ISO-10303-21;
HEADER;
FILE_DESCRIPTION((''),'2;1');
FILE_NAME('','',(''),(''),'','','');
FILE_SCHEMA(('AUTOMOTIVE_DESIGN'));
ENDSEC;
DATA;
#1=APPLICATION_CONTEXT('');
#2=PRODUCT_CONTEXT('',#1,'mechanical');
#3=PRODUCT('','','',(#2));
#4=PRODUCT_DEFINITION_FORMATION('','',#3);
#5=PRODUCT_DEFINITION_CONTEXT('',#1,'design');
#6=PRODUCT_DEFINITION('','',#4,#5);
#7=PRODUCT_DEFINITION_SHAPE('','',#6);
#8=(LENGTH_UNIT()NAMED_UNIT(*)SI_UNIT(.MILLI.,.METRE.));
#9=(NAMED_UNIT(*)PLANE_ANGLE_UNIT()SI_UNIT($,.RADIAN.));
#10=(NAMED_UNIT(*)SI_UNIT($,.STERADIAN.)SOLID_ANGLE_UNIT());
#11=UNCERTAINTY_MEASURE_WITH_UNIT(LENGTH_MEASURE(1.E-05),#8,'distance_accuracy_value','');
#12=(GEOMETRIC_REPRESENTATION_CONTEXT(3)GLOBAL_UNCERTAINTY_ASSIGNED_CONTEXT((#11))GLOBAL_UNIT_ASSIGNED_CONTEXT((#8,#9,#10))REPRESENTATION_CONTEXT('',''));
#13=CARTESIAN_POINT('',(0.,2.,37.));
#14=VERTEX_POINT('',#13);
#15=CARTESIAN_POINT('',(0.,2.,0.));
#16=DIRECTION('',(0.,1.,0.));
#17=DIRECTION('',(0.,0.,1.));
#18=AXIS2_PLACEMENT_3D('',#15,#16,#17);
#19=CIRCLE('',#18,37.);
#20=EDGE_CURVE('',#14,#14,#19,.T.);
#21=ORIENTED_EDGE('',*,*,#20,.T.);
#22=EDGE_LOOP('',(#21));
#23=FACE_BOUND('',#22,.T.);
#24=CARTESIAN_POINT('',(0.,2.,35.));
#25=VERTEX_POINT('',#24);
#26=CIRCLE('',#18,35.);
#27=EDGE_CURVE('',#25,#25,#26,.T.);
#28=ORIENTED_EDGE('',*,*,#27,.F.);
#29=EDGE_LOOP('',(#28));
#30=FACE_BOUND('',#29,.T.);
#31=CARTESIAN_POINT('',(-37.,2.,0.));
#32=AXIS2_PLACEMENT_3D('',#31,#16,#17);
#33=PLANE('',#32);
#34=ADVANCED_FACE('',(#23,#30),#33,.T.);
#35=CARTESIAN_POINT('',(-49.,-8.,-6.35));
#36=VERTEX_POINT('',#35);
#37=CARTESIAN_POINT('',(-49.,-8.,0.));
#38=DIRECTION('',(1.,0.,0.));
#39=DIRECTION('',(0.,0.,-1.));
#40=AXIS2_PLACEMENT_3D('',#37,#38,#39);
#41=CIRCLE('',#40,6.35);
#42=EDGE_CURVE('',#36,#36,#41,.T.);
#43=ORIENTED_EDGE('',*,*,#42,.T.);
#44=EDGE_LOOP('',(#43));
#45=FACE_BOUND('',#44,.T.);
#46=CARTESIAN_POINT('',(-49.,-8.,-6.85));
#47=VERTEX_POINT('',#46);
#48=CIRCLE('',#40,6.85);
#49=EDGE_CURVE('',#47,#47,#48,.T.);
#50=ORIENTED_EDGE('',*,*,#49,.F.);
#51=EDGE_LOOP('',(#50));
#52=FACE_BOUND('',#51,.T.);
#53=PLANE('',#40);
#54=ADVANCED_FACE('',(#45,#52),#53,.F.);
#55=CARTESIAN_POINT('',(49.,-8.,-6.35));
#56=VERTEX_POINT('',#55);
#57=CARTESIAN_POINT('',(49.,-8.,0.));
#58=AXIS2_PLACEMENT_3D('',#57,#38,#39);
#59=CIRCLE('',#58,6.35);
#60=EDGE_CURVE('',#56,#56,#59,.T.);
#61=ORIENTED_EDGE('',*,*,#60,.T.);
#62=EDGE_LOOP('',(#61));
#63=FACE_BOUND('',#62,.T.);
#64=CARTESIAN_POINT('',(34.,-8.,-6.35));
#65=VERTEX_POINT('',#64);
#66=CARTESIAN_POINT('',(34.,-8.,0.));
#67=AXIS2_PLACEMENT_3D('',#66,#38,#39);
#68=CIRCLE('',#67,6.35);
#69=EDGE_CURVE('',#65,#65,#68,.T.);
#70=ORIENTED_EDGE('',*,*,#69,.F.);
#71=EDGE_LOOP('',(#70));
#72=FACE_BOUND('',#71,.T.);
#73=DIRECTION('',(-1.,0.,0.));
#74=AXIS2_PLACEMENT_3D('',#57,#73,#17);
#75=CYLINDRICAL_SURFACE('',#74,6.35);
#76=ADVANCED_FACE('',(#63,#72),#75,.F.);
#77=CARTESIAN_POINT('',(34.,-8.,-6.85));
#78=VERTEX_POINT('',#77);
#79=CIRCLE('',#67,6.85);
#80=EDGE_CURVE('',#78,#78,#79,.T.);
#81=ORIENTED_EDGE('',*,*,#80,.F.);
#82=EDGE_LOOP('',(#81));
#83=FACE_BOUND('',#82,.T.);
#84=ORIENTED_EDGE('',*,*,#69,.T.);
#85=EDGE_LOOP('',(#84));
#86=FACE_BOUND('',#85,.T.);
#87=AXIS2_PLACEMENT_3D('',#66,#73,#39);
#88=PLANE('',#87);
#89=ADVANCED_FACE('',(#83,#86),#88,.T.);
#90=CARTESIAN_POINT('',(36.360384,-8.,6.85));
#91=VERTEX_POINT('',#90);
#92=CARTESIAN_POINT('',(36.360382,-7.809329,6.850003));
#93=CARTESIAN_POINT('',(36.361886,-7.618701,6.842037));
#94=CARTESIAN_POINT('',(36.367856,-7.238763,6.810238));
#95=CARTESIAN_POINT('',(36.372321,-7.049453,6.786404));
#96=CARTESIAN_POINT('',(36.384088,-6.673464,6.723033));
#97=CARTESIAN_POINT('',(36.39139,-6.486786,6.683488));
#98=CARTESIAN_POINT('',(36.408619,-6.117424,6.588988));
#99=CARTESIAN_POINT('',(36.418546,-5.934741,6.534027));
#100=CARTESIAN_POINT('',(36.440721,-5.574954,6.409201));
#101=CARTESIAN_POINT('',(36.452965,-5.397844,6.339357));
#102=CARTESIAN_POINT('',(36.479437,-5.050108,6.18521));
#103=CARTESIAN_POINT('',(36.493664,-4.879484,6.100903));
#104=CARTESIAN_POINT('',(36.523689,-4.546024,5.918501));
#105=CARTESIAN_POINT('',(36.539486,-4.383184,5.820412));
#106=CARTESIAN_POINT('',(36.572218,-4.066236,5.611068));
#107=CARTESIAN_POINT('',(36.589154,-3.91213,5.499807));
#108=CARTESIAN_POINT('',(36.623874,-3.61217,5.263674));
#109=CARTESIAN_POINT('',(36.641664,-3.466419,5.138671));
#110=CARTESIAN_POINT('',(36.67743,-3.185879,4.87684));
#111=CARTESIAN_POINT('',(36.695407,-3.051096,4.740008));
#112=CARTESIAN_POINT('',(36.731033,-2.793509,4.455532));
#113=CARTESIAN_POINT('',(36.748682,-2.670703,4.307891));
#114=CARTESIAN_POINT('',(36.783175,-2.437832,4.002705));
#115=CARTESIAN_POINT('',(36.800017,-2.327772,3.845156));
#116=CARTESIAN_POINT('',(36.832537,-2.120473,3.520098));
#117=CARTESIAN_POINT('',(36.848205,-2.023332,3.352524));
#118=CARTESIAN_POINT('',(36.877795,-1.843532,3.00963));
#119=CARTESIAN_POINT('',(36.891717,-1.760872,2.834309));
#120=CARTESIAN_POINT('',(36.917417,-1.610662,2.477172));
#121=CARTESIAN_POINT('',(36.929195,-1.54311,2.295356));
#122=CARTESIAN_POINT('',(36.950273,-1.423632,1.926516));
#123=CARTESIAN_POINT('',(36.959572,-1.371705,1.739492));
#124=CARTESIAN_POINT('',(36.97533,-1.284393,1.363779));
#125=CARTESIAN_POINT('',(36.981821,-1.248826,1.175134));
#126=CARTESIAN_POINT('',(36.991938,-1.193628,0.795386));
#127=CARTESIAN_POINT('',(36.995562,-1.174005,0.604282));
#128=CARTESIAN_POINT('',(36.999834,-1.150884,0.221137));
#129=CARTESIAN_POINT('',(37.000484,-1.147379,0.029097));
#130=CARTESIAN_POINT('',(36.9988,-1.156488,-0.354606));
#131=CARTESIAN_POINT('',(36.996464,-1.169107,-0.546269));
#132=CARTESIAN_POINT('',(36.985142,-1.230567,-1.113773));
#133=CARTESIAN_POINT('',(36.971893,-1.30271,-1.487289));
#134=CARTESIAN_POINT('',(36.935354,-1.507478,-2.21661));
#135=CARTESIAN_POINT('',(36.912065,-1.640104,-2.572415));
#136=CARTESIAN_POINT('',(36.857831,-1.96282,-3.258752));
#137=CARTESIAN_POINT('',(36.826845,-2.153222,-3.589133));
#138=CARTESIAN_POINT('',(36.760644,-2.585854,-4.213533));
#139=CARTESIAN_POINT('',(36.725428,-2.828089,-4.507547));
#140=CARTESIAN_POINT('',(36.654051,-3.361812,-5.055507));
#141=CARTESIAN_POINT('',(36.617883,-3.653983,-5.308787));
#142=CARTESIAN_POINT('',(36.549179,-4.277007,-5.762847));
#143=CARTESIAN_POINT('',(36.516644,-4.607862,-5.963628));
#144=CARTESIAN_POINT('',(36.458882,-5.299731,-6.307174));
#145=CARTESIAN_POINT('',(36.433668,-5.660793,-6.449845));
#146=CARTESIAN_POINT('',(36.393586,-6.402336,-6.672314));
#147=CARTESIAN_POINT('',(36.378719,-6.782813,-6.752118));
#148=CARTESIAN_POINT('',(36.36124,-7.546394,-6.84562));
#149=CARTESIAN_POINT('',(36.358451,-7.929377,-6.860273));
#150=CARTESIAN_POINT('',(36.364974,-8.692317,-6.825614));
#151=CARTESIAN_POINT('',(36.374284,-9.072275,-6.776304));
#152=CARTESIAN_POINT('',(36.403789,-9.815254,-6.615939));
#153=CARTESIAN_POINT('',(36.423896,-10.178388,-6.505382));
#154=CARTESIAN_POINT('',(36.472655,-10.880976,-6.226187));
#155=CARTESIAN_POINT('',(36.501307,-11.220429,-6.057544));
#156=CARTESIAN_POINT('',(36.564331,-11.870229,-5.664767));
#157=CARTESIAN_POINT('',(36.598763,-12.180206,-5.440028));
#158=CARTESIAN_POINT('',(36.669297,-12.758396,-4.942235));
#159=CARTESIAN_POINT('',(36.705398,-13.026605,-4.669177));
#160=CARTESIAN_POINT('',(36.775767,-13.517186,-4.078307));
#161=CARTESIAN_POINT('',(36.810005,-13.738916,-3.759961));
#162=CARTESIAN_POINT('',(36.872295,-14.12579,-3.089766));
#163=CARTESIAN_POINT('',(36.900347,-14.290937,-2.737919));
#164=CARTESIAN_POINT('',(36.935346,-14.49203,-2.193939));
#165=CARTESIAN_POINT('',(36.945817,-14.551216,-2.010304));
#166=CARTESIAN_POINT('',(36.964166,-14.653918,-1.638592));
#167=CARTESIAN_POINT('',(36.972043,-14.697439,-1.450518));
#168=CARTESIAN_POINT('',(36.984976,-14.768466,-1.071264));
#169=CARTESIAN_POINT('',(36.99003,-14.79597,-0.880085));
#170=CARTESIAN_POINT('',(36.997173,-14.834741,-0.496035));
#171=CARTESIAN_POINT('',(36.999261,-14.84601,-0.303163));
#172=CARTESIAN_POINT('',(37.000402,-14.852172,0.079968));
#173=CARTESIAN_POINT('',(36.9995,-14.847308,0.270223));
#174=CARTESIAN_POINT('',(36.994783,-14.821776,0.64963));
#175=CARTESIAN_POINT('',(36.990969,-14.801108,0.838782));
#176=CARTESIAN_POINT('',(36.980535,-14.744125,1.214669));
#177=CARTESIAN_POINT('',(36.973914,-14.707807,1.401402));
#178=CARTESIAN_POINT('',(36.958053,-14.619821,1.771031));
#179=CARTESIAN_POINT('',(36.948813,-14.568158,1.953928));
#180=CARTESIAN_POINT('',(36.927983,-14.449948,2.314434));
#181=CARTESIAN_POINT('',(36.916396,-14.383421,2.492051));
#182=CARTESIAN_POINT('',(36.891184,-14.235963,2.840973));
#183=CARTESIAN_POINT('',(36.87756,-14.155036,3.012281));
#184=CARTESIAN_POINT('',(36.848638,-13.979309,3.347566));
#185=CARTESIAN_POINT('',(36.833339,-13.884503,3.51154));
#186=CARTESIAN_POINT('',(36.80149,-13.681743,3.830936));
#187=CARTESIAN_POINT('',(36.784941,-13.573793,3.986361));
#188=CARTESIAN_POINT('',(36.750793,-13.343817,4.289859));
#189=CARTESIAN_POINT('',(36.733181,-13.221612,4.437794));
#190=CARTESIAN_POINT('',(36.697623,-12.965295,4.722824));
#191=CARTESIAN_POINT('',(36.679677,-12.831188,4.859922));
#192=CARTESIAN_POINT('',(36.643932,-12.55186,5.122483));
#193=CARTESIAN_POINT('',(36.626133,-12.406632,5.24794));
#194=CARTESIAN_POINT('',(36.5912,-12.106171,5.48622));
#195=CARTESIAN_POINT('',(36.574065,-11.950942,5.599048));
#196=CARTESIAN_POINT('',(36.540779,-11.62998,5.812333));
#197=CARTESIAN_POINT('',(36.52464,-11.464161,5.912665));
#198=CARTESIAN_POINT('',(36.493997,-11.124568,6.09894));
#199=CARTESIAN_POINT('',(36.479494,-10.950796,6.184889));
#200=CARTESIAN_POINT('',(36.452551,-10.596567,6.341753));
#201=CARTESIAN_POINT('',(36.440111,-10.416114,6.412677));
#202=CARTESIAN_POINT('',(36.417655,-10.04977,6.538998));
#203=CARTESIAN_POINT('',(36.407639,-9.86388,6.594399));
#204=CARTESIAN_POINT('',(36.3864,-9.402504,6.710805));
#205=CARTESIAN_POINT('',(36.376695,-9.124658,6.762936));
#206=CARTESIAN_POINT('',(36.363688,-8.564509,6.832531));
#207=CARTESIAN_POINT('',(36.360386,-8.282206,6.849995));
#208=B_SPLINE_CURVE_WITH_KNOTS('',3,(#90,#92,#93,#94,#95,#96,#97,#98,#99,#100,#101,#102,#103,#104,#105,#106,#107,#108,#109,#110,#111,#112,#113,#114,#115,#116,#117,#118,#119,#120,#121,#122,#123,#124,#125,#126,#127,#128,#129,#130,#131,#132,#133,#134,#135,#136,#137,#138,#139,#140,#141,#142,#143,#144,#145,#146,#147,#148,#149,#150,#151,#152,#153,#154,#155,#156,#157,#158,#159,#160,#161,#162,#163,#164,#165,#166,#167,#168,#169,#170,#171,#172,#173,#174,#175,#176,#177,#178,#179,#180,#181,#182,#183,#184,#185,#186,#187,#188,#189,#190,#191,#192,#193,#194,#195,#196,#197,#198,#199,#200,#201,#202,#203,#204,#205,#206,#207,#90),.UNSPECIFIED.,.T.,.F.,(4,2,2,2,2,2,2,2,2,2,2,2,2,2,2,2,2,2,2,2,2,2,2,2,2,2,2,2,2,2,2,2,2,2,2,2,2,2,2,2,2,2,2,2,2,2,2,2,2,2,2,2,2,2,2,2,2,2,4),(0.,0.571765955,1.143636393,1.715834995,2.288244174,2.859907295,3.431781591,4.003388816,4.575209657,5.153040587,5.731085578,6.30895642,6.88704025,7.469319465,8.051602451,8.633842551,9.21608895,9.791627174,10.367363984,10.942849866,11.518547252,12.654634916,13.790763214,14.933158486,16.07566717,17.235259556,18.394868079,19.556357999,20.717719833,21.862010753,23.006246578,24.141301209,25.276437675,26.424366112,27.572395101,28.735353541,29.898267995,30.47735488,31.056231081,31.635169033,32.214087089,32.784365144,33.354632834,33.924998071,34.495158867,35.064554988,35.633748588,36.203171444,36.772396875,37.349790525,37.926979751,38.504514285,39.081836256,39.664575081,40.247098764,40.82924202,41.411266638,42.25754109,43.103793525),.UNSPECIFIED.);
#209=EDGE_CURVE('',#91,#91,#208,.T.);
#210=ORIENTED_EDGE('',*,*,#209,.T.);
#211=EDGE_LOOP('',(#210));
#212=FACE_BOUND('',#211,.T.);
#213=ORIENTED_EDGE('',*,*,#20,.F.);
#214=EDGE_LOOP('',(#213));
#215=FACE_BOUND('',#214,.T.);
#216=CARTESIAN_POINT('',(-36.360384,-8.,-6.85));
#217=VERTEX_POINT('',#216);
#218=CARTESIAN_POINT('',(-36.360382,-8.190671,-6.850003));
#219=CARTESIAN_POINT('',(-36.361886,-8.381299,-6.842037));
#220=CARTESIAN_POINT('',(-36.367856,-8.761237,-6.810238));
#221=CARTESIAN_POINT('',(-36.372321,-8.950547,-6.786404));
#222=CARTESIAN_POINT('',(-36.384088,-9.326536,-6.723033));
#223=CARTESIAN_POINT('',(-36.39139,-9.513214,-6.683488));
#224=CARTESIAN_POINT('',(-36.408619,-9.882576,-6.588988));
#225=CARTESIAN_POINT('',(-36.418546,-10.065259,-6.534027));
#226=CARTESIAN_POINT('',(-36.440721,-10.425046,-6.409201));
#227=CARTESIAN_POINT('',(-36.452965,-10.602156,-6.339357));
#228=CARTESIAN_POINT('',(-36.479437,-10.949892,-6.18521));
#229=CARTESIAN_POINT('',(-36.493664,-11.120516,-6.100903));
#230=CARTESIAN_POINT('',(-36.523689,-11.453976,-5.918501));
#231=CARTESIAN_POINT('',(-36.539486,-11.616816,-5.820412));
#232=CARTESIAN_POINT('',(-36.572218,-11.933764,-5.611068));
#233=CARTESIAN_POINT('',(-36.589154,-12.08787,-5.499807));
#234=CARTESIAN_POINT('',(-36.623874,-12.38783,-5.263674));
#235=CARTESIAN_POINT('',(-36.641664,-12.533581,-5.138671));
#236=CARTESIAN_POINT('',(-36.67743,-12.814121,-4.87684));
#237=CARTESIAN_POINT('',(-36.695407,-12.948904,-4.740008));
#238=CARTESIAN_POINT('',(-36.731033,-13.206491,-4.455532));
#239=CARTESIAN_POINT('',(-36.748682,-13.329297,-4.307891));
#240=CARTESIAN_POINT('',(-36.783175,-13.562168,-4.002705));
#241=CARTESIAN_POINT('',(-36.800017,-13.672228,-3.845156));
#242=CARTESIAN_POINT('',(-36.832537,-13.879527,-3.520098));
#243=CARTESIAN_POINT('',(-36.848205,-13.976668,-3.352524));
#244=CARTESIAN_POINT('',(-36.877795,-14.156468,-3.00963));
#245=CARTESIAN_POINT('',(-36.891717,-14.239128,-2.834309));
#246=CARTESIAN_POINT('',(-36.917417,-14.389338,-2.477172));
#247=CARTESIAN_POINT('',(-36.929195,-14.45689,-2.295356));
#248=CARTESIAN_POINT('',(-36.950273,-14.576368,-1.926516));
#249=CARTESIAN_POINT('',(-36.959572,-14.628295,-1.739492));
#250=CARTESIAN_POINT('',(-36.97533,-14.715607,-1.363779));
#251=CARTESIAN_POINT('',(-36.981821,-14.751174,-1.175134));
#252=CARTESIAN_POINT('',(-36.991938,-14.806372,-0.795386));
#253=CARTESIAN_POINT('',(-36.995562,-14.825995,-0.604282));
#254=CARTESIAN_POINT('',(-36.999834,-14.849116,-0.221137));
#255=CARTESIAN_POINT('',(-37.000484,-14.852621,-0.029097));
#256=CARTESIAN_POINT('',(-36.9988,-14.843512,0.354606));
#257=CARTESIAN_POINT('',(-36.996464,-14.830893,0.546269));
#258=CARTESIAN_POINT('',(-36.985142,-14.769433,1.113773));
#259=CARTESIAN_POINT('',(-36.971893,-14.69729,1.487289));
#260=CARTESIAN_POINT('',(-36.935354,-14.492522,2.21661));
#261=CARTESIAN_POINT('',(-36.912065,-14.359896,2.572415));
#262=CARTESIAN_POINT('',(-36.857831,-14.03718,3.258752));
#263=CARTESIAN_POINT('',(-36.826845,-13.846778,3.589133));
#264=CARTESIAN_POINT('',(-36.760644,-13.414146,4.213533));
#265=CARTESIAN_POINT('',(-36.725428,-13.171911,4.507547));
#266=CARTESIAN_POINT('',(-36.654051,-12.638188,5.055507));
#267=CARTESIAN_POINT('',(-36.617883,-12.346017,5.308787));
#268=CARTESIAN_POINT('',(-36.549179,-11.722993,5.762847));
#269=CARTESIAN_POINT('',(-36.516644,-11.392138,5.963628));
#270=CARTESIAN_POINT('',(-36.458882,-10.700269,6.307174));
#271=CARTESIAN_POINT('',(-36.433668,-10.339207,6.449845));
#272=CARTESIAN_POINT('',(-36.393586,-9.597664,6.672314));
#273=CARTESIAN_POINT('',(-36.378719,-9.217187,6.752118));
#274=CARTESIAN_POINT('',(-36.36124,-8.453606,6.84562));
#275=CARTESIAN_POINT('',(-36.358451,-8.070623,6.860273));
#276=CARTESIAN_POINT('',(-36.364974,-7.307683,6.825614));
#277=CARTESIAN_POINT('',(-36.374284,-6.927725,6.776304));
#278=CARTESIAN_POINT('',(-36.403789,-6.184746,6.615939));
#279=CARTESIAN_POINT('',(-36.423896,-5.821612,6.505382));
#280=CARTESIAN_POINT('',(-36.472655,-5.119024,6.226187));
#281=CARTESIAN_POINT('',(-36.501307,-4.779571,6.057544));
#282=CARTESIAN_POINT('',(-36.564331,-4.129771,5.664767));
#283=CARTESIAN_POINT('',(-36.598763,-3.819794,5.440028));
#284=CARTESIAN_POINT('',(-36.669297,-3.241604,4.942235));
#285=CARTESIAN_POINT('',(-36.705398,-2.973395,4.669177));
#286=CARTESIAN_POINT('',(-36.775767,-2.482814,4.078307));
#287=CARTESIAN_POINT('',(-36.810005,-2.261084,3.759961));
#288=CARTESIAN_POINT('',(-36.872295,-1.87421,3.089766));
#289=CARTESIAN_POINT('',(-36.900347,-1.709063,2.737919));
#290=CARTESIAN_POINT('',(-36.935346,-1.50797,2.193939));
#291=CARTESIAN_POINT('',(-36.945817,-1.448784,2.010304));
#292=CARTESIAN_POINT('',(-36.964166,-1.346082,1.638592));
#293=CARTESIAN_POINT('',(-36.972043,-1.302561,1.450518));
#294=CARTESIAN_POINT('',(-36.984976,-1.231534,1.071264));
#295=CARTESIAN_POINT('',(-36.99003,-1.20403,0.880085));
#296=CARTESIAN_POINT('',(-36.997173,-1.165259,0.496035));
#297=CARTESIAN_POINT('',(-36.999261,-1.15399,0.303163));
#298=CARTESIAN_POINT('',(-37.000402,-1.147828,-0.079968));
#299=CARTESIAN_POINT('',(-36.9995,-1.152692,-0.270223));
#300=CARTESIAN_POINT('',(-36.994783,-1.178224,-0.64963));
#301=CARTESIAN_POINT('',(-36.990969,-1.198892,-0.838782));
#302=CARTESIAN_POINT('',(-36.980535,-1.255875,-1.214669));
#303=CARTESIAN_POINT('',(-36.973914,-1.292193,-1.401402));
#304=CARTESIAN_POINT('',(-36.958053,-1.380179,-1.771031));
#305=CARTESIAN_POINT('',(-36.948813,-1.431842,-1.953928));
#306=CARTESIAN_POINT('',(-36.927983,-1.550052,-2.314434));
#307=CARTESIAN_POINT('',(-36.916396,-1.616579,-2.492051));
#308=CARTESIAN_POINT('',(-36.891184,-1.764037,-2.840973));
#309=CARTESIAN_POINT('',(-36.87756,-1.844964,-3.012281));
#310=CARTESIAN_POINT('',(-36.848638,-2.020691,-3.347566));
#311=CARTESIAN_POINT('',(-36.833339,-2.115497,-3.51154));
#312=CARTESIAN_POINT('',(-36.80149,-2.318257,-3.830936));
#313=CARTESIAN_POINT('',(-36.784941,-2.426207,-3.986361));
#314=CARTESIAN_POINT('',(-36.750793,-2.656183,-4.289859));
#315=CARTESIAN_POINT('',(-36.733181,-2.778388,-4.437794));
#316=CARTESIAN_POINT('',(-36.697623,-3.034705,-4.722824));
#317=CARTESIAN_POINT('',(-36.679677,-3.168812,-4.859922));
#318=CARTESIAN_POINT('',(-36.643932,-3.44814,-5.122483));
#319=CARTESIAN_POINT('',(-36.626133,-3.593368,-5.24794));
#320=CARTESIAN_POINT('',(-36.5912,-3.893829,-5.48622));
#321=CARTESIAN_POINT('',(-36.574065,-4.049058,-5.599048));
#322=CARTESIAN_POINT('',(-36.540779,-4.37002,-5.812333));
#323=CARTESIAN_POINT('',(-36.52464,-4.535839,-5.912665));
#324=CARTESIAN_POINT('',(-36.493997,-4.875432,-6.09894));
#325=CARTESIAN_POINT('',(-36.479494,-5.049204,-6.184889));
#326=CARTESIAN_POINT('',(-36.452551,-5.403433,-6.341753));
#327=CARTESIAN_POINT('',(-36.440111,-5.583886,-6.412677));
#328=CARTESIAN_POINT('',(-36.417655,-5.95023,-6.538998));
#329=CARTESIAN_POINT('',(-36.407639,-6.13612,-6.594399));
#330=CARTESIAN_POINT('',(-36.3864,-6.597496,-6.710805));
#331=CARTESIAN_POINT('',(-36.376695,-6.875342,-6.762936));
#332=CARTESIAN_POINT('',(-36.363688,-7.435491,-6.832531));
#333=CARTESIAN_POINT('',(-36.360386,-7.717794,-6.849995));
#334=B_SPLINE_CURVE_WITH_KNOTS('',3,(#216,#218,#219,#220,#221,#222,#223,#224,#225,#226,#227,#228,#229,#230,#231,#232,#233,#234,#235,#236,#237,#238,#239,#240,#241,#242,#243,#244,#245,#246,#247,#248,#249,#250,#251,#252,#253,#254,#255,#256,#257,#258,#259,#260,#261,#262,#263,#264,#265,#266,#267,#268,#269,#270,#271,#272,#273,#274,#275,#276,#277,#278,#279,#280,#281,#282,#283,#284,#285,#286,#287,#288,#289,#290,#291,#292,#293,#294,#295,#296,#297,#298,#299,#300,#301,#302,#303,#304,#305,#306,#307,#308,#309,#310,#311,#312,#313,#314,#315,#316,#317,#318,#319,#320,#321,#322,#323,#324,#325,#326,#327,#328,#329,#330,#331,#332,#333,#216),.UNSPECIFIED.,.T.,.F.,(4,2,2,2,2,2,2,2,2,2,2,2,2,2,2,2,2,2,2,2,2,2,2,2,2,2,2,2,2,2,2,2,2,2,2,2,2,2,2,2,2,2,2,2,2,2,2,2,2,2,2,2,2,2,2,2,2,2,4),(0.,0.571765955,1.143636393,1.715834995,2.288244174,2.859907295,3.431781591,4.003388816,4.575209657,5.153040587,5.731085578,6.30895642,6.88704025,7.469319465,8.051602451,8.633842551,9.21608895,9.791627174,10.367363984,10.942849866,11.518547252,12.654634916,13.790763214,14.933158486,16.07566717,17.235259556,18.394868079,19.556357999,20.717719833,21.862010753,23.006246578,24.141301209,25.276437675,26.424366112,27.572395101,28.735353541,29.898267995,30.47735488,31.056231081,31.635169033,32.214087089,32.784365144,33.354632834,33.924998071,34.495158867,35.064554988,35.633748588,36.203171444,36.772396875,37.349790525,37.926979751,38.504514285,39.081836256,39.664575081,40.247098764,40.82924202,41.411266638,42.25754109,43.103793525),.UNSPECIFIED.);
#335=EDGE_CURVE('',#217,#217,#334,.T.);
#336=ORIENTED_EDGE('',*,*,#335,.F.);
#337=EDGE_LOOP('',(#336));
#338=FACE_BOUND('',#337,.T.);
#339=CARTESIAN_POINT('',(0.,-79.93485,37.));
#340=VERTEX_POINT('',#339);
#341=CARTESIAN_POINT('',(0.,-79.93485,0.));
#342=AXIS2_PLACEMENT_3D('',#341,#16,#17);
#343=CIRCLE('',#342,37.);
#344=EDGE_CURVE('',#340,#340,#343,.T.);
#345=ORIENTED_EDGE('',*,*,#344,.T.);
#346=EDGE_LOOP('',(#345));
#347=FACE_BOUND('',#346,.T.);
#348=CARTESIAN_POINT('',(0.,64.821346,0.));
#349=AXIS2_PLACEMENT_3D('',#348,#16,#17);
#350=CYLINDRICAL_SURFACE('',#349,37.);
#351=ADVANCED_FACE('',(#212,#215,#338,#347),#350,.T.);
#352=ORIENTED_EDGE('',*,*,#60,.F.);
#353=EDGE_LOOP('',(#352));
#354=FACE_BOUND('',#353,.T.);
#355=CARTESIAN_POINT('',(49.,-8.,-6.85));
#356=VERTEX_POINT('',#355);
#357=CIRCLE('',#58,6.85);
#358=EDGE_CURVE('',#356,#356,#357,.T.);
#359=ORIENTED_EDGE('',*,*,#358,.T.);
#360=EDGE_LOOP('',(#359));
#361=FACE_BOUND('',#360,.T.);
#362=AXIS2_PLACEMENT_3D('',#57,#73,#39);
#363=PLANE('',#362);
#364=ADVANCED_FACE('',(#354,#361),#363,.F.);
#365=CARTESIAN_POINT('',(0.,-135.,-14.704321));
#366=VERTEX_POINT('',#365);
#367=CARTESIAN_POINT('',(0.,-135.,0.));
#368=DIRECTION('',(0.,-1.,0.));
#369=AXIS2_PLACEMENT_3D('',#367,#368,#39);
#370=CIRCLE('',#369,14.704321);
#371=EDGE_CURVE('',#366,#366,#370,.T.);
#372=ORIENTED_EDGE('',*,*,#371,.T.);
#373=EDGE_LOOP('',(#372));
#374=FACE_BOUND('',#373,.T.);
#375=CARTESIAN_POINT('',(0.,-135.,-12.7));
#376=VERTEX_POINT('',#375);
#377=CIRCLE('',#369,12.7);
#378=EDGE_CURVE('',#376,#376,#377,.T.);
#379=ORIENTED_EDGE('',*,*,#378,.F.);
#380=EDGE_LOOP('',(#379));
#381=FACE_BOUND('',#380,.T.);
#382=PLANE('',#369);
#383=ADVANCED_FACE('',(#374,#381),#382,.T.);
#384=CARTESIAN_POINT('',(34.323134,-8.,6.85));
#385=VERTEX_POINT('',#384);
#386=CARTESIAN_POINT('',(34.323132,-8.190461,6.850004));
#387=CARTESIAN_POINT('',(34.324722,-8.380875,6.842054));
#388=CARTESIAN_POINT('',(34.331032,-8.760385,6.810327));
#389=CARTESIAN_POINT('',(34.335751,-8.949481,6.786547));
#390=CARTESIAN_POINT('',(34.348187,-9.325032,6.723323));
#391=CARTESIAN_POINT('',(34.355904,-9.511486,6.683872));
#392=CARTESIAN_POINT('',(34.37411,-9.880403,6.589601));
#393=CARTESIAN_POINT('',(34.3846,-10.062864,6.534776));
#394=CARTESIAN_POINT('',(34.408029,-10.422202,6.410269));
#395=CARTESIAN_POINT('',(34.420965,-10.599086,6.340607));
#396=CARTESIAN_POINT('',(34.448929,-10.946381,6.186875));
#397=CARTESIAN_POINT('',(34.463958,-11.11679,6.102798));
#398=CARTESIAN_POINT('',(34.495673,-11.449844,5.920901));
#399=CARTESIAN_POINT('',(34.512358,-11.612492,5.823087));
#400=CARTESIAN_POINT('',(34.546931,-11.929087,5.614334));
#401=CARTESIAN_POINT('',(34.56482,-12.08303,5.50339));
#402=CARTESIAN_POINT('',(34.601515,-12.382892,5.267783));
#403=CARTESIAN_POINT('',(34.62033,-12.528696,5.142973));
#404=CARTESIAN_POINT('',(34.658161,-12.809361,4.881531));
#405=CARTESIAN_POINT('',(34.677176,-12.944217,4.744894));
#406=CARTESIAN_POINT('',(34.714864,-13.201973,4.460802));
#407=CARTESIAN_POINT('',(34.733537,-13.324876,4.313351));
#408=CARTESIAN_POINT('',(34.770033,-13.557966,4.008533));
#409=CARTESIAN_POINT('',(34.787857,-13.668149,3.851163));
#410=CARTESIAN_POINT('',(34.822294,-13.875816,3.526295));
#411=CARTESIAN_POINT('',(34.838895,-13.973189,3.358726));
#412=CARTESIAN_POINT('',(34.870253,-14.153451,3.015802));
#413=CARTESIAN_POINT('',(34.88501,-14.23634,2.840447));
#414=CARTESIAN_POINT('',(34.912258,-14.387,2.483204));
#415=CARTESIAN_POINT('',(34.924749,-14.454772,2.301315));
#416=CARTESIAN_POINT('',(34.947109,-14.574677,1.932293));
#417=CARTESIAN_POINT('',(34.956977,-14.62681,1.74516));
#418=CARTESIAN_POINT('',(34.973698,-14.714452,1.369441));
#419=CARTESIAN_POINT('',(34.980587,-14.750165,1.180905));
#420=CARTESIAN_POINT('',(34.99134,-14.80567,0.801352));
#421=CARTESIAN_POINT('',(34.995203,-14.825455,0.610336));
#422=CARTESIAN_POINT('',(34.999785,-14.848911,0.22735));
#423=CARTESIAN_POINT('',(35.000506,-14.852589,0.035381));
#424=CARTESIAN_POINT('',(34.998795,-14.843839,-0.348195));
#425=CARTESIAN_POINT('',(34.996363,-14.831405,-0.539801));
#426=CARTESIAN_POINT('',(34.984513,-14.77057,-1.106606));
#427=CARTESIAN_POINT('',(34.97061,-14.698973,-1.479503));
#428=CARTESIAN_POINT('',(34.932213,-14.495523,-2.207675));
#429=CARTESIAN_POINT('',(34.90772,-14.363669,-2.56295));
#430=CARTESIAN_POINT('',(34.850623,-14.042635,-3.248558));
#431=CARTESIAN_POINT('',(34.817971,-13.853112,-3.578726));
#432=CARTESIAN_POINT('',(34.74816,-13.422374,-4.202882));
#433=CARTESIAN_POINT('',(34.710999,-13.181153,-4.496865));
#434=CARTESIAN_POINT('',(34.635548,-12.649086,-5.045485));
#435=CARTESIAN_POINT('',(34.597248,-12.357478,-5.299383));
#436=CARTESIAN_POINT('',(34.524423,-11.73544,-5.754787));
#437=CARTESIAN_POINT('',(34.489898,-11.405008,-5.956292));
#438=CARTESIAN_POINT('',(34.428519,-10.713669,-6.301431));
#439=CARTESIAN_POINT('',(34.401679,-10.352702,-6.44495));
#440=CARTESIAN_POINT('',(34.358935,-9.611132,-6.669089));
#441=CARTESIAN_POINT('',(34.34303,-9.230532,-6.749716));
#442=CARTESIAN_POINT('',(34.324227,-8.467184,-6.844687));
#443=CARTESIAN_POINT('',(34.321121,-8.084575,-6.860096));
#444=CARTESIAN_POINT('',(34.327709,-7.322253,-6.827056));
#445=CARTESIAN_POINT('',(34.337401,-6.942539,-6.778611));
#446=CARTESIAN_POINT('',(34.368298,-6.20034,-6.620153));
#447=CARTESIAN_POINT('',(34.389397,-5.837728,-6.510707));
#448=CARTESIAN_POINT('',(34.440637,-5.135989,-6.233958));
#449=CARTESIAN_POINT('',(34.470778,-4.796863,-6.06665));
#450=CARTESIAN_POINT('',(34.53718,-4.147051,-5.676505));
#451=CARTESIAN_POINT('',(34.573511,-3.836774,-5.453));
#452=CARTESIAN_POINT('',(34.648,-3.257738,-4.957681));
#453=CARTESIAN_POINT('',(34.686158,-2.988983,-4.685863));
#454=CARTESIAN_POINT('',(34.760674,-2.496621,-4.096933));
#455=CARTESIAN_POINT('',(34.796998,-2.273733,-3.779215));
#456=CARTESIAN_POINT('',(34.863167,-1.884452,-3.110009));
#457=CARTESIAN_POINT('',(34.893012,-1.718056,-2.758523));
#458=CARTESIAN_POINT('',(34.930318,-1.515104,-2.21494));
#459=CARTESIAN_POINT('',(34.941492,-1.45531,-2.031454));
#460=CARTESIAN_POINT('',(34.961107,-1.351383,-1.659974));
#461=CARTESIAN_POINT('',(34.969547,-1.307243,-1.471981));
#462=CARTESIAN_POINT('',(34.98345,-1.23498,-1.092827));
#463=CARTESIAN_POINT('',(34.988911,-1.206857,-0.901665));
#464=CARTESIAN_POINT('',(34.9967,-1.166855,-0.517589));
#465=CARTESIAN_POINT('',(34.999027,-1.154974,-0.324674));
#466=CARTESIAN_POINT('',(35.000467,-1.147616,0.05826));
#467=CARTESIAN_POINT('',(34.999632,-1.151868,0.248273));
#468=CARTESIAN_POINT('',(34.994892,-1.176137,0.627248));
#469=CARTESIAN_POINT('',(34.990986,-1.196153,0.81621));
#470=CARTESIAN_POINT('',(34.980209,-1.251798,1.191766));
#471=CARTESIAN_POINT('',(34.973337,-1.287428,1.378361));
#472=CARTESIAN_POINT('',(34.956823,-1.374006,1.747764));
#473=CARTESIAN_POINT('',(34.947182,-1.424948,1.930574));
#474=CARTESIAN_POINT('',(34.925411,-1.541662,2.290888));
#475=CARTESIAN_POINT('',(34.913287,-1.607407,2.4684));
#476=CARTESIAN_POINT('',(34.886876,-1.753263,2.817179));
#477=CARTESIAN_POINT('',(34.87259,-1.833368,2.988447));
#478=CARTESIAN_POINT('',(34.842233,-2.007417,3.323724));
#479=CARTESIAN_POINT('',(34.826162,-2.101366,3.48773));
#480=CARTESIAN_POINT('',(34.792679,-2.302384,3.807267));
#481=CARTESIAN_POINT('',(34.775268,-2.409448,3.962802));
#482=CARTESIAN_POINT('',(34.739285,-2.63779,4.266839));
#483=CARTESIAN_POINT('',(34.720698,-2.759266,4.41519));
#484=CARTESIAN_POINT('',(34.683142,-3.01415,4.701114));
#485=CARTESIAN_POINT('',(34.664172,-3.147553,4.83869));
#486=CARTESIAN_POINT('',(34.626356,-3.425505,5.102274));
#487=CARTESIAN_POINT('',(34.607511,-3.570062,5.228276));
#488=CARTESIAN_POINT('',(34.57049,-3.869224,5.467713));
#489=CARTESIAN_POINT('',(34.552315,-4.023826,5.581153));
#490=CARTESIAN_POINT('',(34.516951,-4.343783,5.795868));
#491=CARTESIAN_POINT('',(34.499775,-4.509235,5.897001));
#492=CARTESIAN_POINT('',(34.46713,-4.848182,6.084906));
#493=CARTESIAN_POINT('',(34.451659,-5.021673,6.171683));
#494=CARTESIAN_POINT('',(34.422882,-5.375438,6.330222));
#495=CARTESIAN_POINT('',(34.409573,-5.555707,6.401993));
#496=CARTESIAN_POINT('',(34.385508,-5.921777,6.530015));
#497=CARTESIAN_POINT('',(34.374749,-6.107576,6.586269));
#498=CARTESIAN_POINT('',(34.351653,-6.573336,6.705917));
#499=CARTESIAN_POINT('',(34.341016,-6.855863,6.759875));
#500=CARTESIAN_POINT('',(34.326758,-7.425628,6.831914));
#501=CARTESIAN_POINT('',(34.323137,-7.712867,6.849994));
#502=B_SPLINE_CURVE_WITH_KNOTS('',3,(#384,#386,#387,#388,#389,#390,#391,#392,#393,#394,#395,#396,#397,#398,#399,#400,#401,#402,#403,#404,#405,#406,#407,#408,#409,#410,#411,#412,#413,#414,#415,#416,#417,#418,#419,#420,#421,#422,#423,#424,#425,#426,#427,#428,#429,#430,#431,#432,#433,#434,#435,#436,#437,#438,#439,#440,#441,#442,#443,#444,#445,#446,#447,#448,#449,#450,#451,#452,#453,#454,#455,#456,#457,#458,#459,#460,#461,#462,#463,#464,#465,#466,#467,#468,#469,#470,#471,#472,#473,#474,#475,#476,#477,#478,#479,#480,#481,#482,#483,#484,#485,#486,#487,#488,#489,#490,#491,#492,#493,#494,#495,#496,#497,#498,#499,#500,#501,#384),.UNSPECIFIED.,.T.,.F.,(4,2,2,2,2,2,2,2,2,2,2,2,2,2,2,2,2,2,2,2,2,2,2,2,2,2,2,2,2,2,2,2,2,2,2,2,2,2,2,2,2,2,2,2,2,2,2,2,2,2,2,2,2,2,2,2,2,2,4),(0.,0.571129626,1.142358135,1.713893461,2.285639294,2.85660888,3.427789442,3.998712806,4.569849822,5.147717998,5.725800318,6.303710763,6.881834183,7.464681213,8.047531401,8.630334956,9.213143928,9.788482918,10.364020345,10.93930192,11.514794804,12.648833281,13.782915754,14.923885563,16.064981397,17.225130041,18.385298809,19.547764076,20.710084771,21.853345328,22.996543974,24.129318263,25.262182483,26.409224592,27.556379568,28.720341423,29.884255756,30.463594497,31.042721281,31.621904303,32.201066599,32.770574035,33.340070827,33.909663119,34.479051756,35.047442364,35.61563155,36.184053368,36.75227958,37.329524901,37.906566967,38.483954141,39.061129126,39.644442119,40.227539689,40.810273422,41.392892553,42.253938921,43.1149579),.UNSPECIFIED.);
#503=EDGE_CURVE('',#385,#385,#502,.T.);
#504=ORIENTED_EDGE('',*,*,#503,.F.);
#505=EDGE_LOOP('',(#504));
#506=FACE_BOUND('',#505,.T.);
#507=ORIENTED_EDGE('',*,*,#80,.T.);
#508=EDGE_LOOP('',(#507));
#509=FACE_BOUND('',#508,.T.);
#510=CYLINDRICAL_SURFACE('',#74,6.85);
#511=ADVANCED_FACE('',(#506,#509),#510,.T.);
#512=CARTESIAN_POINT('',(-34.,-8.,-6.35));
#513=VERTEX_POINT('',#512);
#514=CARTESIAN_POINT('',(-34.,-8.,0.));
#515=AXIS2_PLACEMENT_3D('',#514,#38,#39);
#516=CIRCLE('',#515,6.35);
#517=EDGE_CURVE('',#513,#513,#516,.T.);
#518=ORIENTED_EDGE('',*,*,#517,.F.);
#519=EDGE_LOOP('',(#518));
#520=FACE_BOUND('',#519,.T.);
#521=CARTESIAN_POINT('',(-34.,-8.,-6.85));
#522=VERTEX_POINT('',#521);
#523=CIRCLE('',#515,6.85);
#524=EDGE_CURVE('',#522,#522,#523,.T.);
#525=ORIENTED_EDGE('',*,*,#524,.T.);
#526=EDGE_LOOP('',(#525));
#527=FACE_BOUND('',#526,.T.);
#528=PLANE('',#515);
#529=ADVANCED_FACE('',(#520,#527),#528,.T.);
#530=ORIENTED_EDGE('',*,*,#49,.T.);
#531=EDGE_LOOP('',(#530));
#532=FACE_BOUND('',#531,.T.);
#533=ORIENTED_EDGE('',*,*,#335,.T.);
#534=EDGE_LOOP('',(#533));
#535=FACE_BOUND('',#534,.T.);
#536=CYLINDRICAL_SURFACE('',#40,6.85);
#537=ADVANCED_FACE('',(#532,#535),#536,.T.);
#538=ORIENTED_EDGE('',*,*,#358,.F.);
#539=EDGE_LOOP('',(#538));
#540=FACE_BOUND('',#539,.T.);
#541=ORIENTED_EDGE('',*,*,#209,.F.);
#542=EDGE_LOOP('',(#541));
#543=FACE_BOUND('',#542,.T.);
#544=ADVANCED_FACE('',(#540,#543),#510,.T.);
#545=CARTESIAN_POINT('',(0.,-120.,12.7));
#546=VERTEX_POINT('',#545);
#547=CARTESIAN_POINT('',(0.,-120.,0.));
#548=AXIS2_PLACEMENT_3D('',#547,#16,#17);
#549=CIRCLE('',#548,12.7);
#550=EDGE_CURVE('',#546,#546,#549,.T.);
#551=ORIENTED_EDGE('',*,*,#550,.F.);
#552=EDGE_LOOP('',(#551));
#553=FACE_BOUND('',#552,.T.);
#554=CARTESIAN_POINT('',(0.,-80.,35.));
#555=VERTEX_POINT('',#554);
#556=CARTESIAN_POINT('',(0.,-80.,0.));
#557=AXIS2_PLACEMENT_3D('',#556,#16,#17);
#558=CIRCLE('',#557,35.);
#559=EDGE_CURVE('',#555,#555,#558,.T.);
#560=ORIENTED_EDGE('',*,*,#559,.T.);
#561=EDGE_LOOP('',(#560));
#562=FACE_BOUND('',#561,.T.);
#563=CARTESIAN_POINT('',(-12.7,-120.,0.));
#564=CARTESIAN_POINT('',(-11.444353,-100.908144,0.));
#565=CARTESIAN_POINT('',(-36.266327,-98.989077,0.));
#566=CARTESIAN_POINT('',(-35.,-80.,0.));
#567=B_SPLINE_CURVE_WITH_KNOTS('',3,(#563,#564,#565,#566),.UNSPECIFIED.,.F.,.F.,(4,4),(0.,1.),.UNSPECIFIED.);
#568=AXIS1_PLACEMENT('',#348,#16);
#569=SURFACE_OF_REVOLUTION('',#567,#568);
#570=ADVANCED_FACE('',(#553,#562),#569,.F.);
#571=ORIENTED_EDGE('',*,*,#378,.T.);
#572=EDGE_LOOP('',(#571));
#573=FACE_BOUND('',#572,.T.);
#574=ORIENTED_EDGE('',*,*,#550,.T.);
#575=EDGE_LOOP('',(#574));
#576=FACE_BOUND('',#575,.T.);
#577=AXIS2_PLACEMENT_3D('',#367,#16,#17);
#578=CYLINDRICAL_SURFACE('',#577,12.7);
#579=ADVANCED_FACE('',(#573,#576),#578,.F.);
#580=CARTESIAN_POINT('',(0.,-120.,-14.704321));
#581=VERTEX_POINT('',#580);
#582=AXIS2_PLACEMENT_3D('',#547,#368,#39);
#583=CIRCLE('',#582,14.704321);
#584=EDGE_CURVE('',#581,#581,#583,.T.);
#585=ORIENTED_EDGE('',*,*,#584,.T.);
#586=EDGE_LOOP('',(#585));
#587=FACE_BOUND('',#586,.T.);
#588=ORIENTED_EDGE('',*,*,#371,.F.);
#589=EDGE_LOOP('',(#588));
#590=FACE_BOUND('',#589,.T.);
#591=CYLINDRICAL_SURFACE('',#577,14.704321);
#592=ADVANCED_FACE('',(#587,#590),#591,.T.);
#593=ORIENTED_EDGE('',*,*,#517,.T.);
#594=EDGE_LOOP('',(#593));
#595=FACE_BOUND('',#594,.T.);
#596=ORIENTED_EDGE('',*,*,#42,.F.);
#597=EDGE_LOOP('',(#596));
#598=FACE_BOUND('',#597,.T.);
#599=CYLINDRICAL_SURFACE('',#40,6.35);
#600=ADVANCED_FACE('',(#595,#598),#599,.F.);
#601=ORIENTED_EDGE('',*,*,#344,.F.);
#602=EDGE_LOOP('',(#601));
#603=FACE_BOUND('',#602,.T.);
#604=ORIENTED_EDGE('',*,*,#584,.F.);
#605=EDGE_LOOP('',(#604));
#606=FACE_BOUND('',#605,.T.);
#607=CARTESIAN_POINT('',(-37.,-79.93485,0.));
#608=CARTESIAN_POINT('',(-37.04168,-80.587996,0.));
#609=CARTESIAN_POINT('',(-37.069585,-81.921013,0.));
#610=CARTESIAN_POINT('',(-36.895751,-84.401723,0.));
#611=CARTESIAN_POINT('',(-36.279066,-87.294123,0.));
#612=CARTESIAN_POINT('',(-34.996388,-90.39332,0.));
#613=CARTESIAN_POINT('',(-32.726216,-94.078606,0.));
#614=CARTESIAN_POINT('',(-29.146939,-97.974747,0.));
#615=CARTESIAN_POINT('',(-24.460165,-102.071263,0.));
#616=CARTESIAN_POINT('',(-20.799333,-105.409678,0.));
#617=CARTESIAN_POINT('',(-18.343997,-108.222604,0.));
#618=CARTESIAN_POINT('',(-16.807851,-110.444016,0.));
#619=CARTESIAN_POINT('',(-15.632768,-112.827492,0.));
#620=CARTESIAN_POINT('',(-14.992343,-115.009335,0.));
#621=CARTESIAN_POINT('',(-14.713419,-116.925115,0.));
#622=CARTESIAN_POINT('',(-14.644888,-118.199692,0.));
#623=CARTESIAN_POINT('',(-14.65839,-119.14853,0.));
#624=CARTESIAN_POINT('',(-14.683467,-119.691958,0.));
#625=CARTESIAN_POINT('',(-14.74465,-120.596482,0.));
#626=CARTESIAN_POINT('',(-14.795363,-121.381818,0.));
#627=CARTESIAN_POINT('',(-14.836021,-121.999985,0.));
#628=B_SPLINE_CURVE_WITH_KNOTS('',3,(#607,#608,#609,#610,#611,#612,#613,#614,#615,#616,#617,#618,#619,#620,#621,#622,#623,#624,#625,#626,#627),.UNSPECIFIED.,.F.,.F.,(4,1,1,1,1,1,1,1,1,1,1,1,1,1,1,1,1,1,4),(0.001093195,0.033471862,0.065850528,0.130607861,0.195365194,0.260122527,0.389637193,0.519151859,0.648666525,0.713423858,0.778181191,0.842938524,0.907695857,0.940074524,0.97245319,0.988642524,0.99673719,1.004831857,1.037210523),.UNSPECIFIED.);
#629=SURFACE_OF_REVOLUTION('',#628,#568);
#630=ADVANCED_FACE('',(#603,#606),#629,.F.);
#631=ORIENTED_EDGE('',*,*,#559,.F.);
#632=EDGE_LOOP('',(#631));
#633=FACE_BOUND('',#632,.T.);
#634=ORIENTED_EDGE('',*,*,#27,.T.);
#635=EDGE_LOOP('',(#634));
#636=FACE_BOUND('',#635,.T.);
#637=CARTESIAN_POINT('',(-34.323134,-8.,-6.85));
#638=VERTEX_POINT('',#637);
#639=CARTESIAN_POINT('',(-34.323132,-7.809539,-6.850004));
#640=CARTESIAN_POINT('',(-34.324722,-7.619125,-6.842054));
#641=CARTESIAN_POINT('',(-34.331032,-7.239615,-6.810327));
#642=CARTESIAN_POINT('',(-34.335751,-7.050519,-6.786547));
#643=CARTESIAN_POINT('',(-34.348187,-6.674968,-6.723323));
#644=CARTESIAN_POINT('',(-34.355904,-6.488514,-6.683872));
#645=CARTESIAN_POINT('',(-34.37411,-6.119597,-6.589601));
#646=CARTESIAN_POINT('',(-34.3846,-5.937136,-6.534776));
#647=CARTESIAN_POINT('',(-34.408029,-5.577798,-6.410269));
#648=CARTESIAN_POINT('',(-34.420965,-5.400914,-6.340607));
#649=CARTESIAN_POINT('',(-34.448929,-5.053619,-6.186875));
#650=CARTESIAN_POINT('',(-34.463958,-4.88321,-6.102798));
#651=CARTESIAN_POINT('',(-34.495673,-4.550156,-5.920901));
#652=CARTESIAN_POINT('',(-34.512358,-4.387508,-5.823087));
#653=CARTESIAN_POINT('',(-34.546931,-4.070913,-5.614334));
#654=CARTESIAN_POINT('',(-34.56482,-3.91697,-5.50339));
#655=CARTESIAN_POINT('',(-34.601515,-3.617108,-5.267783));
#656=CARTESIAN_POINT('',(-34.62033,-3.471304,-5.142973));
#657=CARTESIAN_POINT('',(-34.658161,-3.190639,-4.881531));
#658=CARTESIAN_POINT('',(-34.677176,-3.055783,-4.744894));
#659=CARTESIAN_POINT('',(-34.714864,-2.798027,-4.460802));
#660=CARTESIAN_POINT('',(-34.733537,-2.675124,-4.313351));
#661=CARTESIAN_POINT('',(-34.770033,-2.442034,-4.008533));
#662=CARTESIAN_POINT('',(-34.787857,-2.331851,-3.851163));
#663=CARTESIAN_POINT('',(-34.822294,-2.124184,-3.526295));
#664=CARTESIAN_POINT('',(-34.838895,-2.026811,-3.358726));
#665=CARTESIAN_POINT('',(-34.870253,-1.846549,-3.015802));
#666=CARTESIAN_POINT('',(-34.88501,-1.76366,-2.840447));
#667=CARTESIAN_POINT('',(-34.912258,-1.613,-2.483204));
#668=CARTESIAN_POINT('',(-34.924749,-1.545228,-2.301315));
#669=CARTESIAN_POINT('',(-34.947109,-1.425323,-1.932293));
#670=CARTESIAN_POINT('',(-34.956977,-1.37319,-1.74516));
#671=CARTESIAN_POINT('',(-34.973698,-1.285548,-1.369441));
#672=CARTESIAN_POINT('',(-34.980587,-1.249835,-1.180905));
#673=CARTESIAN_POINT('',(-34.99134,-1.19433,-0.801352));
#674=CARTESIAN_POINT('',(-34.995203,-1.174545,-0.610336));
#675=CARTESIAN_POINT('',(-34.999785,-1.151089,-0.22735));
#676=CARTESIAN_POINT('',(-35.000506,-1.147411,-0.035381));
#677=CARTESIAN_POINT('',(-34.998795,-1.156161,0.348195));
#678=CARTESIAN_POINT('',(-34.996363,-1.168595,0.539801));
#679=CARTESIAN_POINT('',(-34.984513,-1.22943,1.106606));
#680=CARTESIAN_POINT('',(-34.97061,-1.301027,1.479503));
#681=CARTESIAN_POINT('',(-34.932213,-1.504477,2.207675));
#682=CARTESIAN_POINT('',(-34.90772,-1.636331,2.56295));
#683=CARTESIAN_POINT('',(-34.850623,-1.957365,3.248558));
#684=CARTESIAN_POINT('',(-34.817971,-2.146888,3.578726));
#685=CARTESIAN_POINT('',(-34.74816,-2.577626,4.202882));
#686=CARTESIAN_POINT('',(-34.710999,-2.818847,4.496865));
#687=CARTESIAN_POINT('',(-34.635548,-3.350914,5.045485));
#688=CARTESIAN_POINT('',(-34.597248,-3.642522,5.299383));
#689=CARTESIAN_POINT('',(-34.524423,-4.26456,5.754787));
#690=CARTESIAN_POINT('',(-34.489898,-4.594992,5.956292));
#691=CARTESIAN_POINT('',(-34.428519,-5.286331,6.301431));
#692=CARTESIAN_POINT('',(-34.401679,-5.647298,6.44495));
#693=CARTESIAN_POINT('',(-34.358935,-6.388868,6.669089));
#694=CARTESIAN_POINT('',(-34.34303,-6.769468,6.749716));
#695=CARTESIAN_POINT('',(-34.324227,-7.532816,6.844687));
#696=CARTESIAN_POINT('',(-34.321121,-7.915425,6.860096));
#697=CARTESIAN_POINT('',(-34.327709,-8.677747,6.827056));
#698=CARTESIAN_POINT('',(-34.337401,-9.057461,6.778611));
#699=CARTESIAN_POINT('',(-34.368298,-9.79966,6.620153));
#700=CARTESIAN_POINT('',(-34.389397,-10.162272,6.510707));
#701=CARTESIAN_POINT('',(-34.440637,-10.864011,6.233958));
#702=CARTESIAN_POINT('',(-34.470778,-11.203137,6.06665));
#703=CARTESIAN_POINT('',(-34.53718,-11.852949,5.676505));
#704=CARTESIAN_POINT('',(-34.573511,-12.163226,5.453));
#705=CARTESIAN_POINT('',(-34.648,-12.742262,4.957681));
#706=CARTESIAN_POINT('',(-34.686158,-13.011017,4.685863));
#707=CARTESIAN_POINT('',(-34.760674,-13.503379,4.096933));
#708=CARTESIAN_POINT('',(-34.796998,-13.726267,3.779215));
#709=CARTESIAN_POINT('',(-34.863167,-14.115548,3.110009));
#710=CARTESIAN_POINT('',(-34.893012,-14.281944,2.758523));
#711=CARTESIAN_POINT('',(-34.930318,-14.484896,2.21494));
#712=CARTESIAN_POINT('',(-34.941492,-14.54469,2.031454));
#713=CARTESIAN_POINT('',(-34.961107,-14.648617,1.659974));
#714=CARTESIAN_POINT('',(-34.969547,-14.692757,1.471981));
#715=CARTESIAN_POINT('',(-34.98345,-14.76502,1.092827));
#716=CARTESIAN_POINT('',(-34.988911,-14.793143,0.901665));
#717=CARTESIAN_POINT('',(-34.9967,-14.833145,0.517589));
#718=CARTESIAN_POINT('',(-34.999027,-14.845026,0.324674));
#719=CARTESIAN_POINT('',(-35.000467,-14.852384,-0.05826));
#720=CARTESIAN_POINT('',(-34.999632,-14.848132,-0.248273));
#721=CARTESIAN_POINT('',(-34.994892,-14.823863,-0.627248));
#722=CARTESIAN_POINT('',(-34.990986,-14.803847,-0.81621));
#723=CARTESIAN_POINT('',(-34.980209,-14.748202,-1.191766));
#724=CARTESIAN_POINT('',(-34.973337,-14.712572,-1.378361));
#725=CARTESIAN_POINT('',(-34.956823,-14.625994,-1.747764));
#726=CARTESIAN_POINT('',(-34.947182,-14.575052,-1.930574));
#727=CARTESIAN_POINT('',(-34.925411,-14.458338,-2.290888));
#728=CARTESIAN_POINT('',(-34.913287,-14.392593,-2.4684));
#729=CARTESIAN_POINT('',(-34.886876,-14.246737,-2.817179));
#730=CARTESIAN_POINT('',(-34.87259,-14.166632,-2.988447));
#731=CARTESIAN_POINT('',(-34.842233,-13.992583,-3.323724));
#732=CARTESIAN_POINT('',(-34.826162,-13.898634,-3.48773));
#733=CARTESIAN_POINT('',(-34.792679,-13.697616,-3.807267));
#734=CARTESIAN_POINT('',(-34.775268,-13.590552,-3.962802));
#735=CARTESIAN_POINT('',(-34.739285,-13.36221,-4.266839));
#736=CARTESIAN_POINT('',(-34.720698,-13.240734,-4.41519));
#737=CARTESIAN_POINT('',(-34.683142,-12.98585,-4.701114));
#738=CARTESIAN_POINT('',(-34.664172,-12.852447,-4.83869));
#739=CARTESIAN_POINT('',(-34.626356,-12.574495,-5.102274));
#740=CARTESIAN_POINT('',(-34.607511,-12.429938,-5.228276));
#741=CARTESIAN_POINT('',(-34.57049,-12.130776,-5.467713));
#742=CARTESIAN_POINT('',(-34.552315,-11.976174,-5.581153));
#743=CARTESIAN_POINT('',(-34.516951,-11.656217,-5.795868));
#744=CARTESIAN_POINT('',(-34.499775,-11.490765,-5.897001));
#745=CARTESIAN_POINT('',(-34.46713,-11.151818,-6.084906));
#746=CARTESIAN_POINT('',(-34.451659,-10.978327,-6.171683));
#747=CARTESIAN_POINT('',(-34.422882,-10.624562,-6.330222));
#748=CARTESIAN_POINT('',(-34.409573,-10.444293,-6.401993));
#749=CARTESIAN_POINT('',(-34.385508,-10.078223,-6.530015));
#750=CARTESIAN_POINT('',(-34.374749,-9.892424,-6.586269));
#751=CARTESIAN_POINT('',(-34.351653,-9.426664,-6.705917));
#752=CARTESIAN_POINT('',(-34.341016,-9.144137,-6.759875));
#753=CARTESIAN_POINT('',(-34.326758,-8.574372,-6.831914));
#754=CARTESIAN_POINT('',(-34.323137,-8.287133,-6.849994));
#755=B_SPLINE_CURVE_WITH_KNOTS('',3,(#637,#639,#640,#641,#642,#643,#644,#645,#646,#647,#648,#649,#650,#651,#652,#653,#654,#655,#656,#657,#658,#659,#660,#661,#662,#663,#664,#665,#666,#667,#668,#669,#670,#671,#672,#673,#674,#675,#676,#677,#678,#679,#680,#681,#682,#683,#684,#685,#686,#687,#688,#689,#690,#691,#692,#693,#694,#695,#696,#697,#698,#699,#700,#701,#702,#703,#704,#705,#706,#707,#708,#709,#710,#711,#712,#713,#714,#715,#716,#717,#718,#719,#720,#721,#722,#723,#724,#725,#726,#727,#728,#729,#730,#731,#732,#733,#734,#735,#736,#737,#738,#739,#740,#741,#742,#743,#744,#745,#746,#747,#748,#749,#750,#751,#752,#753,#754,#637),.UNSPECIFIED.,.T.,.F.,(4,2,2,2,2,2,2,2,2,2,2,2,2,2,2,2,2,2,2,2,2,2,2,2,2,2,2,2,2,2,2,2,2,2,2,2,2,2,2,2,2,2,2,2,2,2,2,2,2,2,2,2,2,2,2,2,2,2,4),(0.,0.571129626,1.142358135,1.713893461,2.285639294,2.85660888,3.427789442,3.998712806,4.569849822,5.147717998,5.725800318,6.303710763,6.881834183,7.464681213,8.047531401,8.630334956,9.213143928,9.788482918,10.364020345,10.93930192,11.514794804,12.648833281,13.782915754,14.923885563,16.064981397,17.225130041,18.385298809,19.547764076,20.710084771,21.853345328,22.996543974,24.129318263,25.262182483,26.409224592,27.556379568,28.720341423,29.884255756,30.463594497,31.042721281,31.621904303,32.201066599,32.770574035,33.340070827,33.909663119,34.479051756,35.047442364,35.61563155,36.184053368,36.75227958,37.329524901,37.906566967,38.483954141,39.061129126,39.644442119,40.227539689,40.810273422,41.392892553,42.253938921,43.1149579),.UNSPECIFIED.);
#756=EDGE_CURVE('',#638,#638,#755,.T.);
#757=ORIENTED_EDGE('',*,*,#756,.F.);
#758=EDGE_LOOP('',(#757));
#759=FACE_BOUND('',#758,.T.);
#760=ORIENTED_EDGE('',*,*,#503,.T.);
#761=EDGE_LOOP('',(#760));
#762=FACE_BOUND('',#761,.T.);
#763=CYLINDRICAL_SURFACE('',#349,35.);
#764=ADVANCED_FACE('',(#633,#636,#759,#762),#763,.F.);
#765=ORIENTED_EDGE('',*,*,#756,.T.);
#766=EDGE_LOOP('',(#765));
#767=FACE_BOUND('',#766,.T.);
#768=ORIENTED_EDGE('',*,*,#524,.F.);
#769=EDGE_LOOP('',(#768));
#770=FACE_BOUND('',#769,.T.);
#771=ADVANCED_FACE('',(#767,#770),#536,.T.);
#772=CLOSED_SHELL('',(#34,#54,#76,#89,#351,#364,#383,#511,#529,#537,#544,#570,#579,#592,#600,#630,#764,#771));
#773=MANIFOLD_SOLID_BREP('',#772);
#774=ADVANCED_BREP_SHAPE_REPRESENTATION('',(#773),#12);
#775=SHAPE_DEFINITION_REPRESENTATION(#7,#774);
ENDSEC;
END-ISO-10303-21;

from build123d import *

# Parameters (mm, degrees)
REVOLVE1_OUTLINE_W   = 2
REVOLVE1_OUTLINE_H   = 0.065149557
REVOLVE1_OUTLINE_H_2 = 81.934850443
SKETCH2_R            = 14.704320858
SKETCH2_R_2          = 12.7
BOSS_EXTRUDE1_DEPTH  = 15
SKETCH4_R            = 6.85
SKETCH4_R_2          = 6.35
BOSS_EXTRUDE2_DEPTH  = 15
SKETCH4_5_R          = 6.35
CUT_EXTRUDE4_DEPTH   = 15


# Read off the part's stored shape, not the designer's step: Revolve1
with BuildPart() as part:
    # Revolve1 outline → Revolve1 (revolve)
    with BuildSketch(Plane.XY):
        with BuildLine():
            Line((37, -80), (35, -80))
            add(Edge.make_bspline(
                [(35, -82.736135297), (35.061393787, -81.864251908), (35.063596331, -80.953652605), (35, -80)],
                knots=[0.949778886, 0.949778886, 0.949778886, 0.949778886, 1, 1, 1, 1], degree=3))
            Line((35, -82.736135297), (35, -90.191453928))
            add(Edge.make_bspline(
                [(37, -82.809632302), (36.978250196, -83.133593549), (36.836525309, -84.679504253), (36.291315776, -87.236669301), (35.466188994, -89.257499139), (35, -90.191453928)],
                knots=[0.049019822, 0.049019822, 0.049019822, 0.049019822, 0.065850528, 0.130607861, 0.192149403, 0.192149403, 0.192149403, 0.192149403], degree=3))
            Line((37, -82.809632302), (37, -80))
        make_face()
        with Locations((36, -79.967425222)):
            Rectangle(REVOLVE1_OUTLINE_W, REVOLVE1_OUTLINE_H)
        with Locations((36, -38.967425222)):
            Rectangle(REVOLVE1_OUTLINE_W, REVOLVE1_OUTLINE_H_2)
        with BuildLine():
            Line((35, -90.191453928), (35, -82.736135297))
            add(Edge.make_bspline(
                [(14.704320858, -110.244560848), (20.054036969, -100.115230984), (34.086034038, -95.715815826), (35, -82.736135297)],
                knots=[0.202139894, 0.202139894, 0.202139894, 0.202139894, 0.949778886, 0.949778886, 0.949778886, 0.949778886], degree=3))
            Line((14.704320858, -110.244560848), (14.704320858, -117.285873132))
            add(Edge.make_bspline(
                [(35, -90.191453928), (34.975639762, -90.240256798), (34.45702902, -91.268889263), (32.726216422, -94.078605796), (29.146939349, -97.974747486), (24.460164947, -102.071263287), (20.799332913, -105.409677741), (18.343997049, -108.22260362), (16.80785122, -110.444015707), (15.632767984, -112.827491945), (14.992343266, -115.009334782), (14.767034778, -116.556856281), (14.713257918, -117.169892816), (14.704320858, -117.285873132)],
                knots=[0.192149403, 0.192149403, 0.192149403, 0.192149403, 0.195365194, 0.260122527, 0.389637193, 0.519151859, 0.648666525, 0.713423858, 0.778181191, 0.842938524, 0.907695857, 0.940074524, 0.947557367, 0.947557367, 0.947557367, 0.947557367], degree=3))
        make_face()
        with BuildLine():
            Line((37.004062891, -80), (37, -80))
            Line((37, -80), (37, -82.809632302))
            add(Edge.make_bspline(
                [(37.046583204, -81.395692582), (37.046583204, -81.564202099), (37.041161168, -82.043595425), (37.020092152, -82.510361628), (37, -82.809632302)],
                knots=[0.025114713, 0.025114713, 0.025114713, 0.025114713, 0.033471862, 0.049019822, 0.049019822, 0.049019822, 0.049019822], degree=3))
            add(Edge.make_bspline(
                [(37.004062891, -80), (37.032293763, -80.46346296), (37.046583201, -80.933027256), (37.046583204, -81.395692582)],
                knots=[0.002169048, 0.002169048, 0.002169048, 0.002169048, 0.025114713, 0.025114713, 0.025114713, 0.025114713], degree=3))
        make_face()
        with BuildLine():
            Line((37, -79.934850443), (37, -80))
            Line((37, -80), (37.004062891, -80))
            add(Edge.make_bspline(
                [(37, -79.934850443), (37.001384922, -79.956552656), (37.002739231, -79.978269621), (37.004062891, -80)],
                knots=[0.001093195, 0.001093195, 0.001093195, 0.001093195, 0.002169048, 0.002169048, 0.002169048, 0.002169048], degree=3))
        make_face()
        with BuildLine():
            Line((14.704320858, -117.285873132), (14.704320858, -110.244560848))
            add(Edge.make_bspline(
                [(12.7, -117.270986606), (12.884709132, -114.610258369), (13.614286943, -112.308467205), (14.704320858, -110.244560848)],
                knots=[0.049804361, 0.049804361, 0.049804361, 0.049804361, 0.202139894, 0.202139894, 0.202139894, 0.202139894], degree=3))
            Line((12.7, -117.270986606), (12.7, -120))
            Line((12.7, -120), (14.704320858, -120))
            add(Edge.make_bspline(
                [(14.704320858, -117.285873132), (14.674586775, -117.671745909), (14.646670593, -118.324994605), (14.658389537, -119.148529578), (14.681458624, -119.648442598), (14.697530226, -119.897656067), (14.704320858, -120)],
                knots=[0.947557367, 0.947557367, 0.947557367, 0.947557367, 0.97245319, 0.988642524, 0.99673719, 1.002239102, 1.002239102, 1.002239102, 1.002239102], degree=3))
        make_face()
        with BuildLine():
            Line((12.7, -120), (12.7, -117.270986606))
            add(Edge.make_bspline(
                [(12.7, -120), (12.637463296, -119.049142305), (12.639611462, -118.140881275), (12.7, -117.270986606)],
                knots=[0, 0, 0, 0, 0.049804361, 0.049804361, 0.049804361, 0.049804361], degree=3))
        make_face()
    revolve(axis=Axis((0, 0, 0), (0, 1, 0)))

    # Sketch2 → Boss-Extrude1 (add)
    with BuildSketch(Plane.XZ.offset(120)):
        with Locations(Location((0, 0, 0), (0, 0, 270))):
            Circle(SKETCH2_R)
        with Locations(Location((0, 0, 0), (0, 0, 90))):
            Circle(SKETCH2_R_2, mode=Mode.SUBTRACT)
    extrude(amount=BOSS_EXTRUDE1_DEPTH)

    # Sketch4 → Boss-Extrude2 (add)
    with BuildSketch(Plane(origin=(-34, 0, 0), x_dir=(0, 0, -1), z_dir=(1, 0, 0))):
        with Locations((0, -8)):
            Circle(SKETCH4_R)
        with Locations((0, -8)):
            Circle(SKETCH4_R_2, mode=Mode.SUBTRACT)
    boss_extrude2 = extrude(amount=-BOSS_EXTRUDE2_DEPTH)

    # Sketch4<5> → Cut-Extrude4 (cut)
    with BuildSketch(Plane(origin=(-34, 0, 0), x_dir=(0, 0, -1), z_dir=(1, 0, 0))):
        with Locations((0, -8)):
            Circle(SKETCH4_5_R)
    cut_extrude4 = extrude(amount=-CUT_EXTRUDE4_DEPTH, mode=Mode.SUBTRACT)

    # Mirror1: Boss-Extrude2, Cut-Extrude4 across plane
    add(boss_extrude2.mirror(Plane(origin=(0, 0, 0), x_dir=(0, 0, 1), z_dir=(1, 0, 0))))
    add(cut_extrude4.mirror(Plane(origin=(0, 0, 0), x_dir=(0, 0, 1), z_dir=(1, 0, 0))), mode=Mode.SUBTRACT)


solid = part.part
